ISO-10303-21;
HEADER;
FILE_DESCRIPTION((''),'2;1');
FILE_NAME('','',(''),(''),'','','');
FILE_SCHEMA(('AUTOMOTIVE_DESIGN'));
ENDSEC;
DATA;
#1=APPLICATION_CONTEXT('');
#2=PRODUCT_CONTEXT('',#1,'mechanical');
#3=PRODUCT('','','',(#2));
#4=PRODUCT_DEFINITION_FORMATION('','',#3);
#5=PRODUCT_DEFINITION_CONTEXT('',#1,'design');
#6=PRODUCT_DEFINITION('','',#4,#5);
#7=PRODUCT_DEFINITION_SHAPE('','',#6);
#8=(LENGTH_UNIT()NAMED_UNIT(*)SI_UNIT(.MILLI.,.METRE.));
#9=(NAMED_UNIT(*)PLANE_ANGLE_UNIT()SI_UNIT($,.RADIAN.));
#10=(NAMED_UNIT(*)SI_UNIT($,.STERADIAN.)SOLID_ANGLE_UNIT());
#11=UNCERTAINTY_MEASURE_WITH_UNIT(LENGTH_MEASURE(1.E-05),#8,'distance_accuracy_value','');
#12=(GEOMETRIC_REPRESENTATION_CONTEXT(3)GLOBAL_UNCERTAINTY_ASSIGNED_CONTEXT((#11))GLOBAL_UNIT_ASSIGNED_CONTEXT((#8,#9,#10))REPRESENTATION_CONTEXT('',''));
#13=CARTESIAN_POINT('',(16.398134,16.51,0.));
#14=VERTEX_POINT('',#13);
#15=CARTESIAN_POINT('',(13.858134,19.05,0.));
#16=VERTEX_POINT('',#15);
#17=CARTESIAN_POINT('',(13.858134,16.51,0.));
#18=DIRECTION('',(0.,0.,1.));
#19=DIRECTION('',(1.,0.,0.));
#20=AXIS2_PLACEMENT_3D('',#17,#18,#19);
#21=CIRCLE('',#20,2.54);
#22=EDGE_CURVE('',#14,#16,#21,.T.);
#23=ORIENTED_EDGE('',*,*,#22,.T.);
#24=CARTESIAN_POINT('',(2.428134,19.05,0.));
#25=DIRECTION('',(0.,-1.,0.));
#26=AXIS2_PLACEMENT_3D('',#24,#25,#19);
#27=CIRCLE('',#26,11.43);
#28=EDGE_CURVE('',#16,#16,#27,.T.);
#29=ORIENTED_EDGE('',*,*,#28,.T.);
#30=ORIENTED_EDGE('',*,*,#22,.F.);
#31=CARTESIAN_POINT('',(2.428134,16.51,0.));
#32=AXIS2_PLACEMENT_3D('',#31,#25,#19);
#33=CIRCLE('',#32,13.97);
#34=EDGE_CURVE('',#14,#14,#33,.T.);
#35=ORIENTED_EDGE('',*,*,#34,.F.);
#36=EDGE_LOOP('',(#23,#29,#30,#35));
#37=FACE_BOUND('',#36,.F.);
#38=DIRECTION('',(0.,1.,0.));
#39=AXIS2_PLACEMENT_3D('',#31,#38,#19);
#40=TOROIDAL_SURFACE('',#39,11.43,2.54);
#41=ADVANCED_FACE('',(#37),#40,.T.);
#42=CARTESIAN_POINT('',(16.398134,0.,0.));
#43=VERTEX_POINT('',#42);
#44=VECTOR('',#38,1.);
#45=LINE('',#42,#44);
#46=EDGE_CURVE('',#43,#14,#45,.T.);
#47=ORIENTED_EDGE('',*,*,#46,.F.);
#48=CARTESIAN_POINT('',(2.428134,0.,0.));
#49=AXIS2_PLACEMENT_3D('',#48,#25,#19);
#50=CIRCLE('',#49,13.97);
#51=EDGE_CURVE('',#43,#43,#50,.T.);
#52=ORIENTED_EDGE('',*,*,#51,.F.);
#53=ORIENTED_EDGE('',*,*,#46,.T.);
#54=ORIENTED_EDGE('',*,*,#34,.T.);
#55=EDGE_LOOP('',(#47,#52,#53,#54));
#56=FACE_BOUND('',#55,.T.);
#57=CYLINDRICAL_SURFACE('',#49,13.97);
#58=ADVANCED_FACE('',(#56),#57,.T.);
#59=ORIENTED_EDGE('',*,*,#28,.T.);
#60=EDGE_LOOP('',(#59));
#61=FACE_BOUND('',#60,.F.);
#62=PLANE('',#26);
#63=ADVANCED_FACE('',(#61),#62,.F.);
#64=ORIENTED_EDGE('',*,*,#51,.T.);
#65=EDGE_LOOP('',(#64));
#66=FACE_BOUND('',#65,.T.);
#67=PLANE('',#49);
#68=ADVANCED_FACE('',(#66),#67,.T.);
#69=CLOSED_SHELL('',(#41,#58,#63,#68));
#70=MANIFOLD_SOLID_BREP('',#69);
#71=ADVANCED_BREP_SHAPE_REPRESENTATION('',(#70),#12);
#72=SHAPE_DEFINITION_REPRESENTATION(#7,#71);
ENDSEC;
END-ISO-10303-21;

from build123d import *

# Parameters (mm, degrees)
F0_R     = 13.97
F1_DEPTH = 19.05
F2_R     = 2.54


# Not quite as in the source:
# - a feature names something its author has since deleted; it is built from what else it names


with BuildPart() as f1:
    # F0 (on Front) → F1 (new body)
    with BuildSketch(Plane.XZ):
        with Locations((-63.3578656336, 0)):
            Circle(F0_R)
    extrude(amount=-F1_DEPTH)

    # F2
    f2_edges = [f1.edges().sort_by_distance(p)[0] for p in [
        (-77.327866, 19.05, 0),
    ]]
    fillet(f2_edges, radius=F2_R)


with BuildPart() as f1_1:
    # F3: moved
    add(f1.part.moved(Location((65.786, 0, 0))))


solid = f1_1.part
